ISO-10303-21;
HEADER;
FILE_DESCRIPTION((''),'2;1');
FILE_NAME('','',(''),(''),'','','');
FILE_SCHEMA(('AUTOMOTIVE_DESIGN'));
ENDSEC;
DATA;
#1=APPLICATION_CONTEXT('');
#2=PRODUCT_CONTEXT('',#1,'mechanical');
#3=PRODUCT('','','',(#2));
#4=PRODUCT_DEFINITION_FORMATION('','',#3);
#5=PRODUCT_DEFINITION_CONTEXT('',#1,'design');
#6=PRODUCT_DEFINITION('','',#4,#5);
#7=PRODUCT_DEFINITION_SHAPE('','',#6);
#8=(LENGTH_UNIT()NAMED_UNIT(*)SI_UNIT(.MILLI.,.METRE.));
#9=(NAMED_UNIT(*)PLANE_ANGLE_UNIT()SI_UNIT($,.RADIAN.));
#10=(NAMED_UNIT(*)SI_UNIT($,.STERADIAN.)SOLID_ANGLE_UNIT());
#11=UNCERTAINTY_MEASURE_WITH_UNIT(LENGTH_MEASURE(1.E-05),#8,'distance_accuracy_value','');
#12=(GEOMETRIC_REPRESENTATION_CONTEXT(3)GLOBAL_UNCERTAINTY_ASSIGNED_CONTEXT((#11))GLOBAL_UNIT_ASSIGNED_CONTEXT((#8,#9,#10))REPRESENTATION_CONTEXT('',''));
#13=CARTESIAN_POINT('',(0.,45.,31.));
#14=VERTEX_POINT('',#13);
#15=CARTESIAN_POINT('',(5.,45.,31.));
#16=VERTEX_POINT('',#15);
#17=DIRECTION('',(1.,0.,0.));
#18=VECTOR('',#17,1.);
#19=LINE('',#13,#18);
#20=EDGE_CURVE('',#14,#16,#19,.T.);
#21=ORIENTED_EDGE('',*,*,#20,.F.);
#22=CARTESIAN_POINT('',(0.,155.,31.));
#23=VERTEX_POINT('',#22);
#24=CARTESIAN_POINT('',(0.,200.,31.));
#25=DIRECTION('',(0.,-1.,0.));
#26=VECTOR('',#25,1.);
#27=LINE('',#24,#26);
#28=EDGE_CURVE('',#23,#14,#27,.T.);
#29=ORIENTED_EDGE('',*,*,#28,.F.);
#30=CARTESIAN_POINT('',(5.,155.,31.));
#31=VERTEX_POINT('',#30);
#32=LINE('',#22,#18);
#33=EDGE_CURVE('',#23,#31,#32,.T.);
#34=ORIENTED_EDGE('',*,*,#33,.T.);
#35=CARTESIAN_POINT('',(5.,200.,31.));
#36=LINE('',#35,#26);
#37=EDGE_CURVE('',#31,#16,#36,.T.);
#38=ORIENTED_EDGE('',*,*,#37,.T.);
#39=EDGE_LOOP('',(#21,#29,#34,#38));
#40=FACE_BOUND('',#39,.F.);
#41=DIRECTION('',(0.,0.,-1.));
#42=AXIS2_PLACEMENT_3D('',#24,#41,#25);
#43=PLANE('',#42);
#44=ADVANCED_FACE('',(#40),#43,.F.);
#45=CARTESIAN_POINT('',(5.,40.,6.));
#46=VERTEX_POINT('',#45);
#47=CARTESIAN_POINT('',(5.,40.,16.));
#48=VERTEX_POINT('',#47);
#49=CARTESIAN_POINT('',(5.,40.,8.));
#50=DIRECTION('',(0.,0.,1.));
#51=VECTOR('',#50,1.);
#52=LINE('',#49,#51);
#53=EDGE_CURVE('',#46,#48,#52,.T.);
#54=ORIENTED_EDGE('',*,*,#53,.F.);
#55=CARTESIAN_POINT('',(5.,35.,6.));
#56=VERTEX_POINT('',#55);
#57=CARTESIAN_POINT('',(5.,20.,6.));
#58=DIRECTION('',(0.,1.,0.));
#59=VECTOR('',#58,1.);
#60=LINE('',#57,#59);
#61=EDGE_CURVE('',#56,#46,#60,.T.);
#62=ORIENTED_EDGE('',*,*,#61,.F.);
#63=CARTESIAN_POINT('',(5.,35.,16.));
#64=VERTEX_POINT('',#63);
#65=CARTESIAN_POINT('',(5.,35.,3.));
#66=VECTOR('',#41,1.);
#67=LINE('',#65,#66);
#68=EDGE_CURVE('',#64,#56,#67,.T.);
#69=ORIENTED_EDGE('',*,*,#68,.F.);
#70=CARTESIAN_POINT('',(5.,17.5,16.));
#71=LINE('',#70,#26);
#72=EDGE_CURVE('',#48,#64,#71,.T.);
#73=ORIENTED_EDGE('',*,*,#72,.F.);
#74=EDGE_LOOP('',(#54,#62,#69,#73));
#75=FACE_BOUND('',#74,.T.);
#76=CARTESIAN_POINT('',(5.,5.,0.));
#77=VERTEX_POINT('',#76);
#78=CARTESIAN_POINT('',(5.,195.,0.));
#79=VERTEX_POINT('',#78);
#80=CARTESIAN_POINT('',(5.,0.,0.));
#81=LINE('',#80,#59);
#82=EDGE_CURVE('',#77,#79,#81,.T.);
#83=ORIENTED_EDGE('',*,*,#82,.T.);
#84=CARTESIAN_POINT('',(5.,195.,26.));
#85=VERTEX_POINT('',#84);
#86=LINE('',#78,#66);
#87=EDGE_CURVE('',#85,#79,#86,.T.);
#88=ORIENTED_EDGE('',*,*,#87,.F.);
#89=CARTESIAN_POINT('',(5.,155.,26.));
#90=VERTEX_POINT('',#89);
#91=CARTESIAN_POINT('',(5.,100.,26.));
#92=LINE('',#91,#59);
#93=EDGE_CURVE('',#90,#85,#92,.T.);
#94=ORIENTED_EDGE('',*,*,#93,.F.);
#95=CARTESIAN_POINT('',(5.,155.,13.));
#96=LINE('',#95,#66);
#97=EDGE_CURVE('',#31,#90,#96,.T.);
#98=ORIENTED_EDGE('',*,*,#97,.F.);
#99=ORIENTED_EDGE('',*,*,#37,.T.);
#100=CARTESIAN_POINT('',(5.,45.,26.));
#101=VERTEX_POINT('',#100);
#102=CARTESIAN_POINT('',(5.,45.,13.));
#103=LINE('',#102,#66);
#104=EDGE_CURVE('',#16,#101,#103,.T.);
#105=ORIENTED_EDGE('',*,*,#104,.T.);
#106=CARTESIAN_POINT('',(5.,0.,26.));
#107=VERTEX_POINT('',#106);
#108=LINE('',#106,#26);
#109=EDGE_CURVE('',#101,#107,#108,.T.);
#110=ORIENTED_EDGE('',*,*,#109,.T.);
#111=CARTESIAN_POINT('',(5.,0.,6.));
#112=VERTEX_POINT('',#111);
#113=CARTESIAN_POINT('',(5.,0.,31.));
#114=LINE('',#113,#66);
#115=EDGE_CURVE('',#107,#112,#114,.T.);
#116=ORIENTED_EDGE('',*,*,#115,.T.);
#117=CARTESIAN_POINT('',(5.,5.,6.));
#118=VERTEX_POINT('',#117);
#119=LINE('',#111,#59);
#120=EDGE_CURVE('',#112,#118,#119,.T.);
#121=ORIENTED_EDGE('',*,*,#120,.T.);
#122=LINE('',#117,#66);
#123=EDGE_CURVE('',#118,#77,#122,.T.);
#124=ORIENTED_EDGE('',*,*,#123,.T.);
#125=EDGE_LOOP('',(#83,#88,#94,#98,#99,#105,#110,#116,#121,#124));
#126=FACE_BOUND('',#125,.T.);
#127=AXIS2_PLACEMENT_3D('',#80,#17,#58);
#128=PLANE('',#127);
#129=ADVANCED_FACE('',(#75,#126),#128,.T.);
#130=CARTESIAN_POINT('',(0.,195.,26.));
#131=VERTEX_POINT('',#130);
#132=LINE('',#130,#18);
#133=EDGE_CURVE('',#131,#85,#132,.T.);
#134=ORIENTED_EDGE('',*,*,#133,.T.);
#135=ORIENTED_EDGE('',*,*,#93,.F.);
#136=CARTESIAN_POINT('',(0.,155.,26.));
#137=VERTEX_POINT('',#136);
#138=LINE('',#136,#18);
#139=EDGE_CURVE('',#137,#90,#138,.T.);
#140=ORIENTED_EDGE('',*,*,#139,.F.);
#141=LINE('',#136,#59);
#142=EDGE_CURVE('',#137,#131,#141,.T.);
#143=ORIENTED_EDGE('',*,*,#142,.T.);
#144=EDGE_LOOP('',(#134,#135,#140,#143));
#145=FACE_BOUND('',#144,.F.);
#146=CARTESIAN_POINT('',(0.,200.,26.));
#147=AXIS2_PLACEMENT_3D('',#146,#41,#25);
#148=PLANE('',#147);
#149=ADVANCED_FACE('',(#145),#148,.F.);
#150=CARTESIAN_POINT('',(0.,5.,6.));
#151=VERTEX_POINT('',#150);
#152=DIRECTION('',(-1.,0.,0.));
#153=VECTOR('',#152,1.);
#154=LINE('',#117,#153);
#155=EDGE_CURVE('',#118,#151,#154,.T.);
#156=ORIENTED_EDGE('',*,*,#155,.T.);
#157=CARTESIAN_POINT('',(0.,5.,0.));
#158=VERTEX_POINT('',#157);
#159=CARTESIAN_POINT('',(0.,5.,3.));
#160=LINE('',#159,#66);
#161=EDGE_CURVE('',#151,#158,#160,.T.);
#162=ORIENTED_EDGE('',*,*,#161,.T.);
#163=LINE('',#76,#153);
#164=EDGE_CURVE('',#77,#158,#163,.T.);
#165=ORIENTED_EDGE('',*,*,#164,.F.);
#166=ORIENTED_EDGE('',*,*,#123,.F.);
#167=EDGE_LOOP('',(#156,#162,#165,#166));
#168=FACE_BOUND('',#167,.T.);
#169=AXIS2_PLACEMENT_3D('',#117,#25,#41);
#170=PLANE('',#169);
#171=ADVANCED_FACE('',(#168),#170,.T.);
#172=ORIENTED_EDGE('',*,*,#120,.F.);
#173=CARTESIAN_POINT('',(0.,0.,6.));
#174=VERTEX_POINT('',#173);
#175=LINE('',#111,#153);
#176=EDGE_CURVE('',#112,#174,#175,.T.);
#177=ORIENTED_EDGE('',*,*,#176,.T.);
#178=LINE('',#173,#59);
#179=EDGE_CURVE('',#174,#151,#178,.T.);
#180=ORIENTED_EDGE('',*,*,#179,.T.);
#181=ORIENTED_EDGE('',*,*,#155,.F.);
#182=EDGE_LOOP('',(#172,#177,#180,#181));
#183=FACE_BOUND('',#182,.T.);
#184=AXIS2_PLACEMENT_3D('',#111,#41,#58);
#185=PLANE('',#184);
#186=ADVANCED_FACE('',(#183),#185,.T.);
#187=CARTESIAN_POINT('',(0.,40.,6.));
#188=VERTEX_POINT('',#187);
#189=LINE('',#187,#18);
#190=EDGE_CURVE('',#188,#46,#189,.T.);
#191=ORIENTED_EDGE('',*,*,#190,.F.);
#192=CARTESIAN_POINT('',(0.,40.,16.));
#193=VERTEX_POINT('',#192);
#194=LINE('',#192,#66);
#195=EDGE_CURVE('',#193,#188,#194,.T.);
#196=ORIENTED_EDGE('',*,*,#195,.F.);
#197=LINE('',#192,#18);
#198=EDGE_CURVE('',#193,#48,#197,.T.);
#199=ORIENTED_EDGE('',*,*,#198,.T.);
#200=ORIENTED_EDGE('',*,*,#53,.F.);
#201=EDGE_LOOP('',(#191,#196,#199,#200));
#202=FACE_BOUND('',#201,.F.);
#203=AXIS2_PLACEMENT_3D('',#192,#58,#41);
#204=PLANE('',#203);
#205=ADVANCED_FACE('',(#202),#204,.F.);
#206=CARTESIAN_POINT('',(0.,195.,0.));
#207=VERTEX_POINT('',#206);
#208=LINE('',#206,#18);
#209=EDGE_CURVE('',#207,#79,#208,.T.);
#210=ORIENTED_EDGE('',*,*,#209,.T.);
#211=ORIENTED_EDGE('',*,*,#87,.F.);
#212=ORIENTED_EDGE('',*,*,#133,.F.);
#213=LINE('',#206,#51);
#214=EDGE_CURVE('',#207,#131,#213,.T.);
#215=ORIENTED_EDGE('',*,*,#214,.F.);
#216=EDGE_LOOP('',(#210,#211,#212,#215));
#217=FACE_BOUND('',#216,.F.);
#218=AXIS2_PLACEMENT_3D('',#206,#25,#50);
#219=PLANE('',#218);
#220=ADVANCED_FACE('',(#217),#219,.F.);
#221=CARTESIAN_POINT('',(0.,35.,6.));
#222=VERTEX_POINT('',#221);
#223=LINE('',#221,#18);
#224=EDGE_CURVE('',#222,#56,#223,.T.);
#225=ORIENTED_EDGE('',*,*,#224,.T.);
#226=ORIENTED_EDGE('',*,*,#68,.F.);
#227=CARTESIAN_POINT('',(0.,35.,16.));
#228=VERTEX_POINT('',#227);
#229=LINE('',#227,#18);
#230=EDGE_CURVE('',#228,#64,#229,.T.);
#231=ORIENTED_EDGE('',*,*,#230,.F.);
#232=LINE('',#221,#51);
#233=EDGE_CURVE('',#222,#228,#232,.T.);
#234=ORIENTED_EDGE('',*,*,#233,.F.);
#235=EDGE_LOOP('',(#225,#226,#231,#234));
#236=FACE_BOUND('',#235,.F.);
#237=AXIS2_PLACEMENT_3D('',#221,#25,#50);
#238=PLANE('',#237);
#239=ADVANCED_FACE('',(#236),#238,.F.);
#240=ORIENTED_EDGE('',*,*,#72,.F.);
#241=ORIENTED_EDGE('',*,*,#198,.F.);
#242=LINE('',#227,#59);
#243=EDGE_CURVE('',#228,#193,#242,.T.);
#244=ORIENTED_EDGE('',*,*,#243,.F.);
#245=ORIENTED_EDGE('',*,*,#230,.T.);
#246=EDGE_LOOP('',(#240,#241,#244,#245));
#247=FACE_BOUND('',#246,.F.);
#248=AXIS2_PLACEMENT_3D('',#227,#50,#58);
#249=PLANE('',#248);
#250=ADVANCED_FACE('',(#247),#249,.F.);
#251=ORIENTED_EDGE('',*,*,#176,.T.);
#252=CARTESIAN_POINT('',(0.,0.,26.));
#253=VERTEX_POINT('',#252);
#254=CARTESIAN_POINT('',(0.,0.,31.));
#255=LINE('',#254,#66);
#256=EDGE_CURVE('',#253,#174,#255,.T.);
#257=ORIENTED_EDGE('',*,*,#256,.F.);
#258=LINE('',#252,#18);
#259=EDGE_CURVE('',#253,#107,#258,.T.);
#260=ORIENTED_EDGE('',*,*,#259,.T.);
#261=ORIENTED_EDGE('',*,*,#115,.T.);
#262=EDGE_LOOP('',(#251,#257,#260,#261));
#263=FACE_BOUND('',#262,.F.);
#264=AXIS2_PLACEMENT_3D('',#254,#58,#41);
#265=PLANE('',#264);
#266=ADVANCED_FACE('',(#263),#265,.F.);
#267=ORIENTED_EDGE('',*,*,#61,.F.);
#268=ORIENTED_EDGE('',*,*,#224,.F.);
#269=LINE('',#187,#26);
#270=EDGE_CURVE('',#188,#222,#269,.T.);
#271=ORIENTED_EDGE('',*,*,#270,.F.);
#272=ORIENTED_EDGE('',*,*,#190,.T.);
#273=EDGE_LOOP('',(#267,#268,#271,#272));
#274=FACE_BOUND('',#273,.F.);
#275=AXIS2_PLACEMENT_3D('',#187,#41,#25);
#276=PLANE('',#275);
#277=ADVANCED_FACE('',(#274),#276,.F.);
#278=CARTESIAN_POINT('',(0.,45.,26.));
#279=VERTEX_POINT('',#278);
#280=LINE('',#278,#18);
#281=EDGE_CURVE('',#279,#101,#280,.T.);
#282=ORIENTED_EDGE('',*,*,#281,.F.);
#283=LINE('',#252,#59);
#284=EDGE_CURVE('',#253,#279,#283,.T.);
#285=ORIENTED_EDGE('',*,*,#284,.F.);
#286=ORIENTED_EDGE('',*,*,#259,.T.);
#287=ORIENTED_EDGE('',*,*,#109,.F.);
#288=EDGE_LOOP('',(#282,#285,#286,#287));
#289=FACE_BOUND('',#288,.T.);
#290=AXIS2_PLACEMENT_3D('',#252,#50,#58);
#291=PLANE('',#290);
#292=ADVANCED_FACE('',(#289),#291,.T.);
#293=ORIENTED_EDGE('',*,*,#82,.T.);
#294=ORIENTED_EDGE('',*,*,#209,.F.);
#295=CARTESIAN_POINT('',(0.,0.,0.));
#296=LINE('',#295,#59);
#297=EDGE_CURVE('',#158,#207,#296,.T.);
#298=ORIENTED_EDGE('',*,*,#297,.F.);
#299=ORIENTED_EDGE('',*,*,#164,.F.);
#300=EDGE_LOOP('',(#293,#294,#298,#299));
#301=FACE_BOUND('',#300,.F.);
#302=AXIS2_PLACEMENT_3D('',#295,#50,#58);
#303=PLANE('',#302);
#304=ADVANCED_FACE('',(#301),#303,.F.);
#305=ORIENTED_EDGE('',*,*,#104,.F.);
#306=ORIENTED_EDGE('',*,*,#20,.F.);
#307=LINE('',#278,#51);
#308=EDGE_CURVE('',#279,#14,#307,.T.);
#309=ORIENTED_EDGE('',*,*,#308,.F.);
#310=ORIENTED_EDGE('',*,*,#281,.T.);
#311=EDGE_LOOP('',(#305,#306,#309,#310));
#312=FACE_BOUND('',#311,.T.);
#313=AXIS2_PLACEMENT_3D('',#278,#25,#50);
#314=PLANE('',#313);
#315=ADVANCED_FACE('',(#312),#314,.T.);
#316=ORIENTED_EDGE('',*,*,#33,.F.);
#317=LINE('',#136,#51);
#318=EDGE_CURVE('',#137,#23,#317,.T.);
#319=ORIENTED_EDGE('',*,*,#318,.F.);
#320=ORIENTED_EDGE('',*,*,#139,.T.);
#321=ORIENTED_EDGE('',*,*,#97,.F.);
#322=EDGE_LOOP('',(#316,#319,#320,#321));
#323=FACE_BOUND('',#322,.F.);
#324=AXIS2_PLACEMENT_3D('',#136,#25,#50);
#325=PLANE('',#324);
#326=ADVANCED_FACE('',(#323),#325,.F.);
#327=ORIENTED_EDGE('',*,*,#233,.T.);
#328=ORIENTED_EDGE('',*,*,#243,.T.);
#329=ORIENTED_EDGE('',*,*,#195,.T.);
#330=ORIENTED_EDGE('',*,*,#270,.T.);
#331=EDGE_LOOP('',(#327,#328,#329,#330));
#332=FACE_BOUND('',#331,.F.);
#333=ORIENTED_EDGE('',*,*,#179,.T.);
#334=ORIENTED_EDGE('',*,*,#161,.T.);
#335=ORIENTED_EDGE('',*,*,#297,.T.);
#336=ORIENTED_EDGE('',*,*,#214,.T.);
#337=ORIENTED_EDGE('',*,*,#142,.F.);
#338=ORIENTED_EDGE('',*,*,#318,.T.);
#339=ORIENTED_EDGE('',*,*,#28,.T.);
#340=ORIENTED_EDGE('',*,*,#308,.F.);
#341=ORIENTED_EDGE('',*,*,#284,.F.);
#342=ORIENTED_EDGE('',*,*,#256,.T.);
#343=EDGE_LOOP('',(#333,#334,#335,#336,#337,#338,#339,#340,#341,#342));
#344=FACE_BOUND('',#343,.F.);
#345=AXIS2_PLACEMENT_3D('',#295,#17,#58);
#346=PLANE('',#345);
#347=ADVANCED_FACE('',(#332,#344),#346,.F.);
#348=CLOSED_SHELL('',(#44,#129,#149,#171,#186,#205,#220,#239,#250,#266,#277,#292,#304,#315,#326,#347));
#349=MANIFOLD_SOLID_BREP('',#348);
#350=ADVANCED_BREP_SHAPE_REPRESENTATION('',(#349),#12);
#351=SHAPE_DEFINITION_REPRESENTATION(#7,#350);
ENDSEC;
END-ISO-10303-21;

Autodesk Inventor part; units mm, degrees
ref_plane "YZ Plane" through (0, 0, 0) normal (1, 0, 0) x (0, 1, 0)
ref_plane "XZ Plane" through (0, 0, 0) normal (0, 1, 0) x (-1, 0, 0)
ref_plane "XY Plane" through (0, 0, 0) normal (0, 0, 1) x (1, 0, 0)
sketch "Sketch1" plane through (0, 0, 0) normal (1, 0, 0) x (0, 1, 0)
  line L0 (0, 0) -> (200, 0)
  line L1 (200, 0) -> (200, 31)
  line L2 (200, 31) -> (0, 31)
  line L3 (0, 31) -> (0, 0)
  dimension "d0" = 31
  dimension "d1" = 200
extrude "Extrusion1" add sketch "Sketch1" along normal blind 5
sketch "Sketch2" plane through (0, 0, 0) normal (-1, 0, 0) x (0, 0, 1)
  line L0 (0, 200) -> (31, 200) projected
  line L1 (31, 200) -> (26, 200)
  line L2 (26, 200) -> (26, 195)
  line L3 (26, 195) -> (31, 195)
  line L4 (31, 195) -> (31, 200)
  line L5 (0, 200) -> (5, 200)
  line L6 (5, 200) -> (5, 195)
  line L7 (5, 195) -> (0, 195)
  line L8 (0, 195) -> (0, 200)
  line L9 (31, 0) -> (0, 0) projected
  line L10 (0, 0) -> (5, 0)
  line L11 (5, 0) -> (5, 5)
  line L12 (5, 5) -> (0, 5)
  line L13 (0, 5) -> (0, 0)
  line L14 (31, 200) -> (31, 0) projected
  line L15 (31, 0) -> (26, 0)
  line L16 (26, 0) -> (26, 5)
  line L17 (26, 5) -> (31, 5)
  line L18 (31, 5) -> (31, 0)
  line L19 (31, 195) -> (26, 195)
  line L20 (26, 195) -> (26, 155)
  line L21 (26, 155) -> (31, 155)
  line L22 (31, 155) -> (31, 195)
  line L23 (31, 5) -> (26, 5)
  line L24 (26, 5) -> (26, 45)
  line L25 (26, 45) -> (31, 45)
  line L26 (31, 45) -> (31, 5)
  point P0 (31, 5)
  point P1 (26, 0)
  point P2 (31, 45)
  point P3 (31, 155)
  dimension "d4" = 5
  dimension "d5" = 5
  dimension "d6" = 5
  dimension "d7" = 5
  dimension "d8" = 5
  dimension "d9" = 5
  dimension "d10" = 5
  dimension "d11" = 5
  dimension "d14" = 40
  dimension "d15" = 40
extrude "Extrusion2" cut sketch "Sketch2" against normal blind 10 contours L0 L4 L3 L2 | L3 L14 L21 L20 | L9 L16 L17 L14 | L17 L24 L25 L14
sketch "Sketch3" plane through (0, 0, 0) normal (-1, 0, 0) x (0, 0, 1)
  line L0 (6, 35) -> (16, 35) projected
  line L1 (6, 40) -> (16, 40) projected
  line L2 (1, 40) -> (1, 35) projected
  line L3 (16, 40) -> (16, 35)
  line L4 (26, 45) -> (26, 0) projected
  point P0 (0, 0)
  point P1 (26, 0)
sketch "Sketch3 outline for Extrusion3" plane through (0, 0, 0) normal (-1, 0, 0) x (0, 0, 1)
  line L0 (6, 40) -> (6, 35)
  line L1 (16, 40) -> (6, 40)
  line L2 (16, 35) -> (16, 40)
  line L3 (6, 35) -> (16, 35)
extrude "Extrusion3" cut sketch "Sketch3 outline for Extrusion3" against normal blind 10
sketch "Sketch4" plane through (0, 0, 0) normal (-1, 0, 0) x (0, 0, 1)
  line L0 (26, 200) -> (26, 155) projected
  line L1 (0, 0) -> (0, 200) projected
  line L2 (26, 200) -> (0, 200)
  line L3 (0, 200) -> (0, 195)
  line L4 (0, 195) -> (26, 195)
  line L5 (26, 195) -> (26, 200)
  dimension "d18" = 5
extrude "Extrusion4" cut sketch "Sketch4" against normal blind 10
sketch "Sketch5" plane through (5, 0, 0) normal (1, 0, 0) x (0, 0, -1)
  line L0 (0, 0) -> (0, 195) projected
  line L1 (0, 0) -> (-6, 0)
  line L2 (-6, 0) -> (-6, 5)
  line L3 (-6, 5) -> (0, 5)
  line L4 (0, 5) -> (0, 0)
  line L5 (-6, 40) -> (-6, 35) projected
  point P0 (0, 5)
  dimension "d21" = 6
  dimension "d22" = 5
  dimension "d23" = 6
extrude "Extrusion5" cut sketch "Sketch5" against normal blind 10
equation "\"d6\" = d4"
equation "\"d7\" = d4"
equation "\"d8\" = d5"
equation "\"d9\" = d8"
equation "\"d11\" = d8"
properties part number "FanVerticalPlate"
